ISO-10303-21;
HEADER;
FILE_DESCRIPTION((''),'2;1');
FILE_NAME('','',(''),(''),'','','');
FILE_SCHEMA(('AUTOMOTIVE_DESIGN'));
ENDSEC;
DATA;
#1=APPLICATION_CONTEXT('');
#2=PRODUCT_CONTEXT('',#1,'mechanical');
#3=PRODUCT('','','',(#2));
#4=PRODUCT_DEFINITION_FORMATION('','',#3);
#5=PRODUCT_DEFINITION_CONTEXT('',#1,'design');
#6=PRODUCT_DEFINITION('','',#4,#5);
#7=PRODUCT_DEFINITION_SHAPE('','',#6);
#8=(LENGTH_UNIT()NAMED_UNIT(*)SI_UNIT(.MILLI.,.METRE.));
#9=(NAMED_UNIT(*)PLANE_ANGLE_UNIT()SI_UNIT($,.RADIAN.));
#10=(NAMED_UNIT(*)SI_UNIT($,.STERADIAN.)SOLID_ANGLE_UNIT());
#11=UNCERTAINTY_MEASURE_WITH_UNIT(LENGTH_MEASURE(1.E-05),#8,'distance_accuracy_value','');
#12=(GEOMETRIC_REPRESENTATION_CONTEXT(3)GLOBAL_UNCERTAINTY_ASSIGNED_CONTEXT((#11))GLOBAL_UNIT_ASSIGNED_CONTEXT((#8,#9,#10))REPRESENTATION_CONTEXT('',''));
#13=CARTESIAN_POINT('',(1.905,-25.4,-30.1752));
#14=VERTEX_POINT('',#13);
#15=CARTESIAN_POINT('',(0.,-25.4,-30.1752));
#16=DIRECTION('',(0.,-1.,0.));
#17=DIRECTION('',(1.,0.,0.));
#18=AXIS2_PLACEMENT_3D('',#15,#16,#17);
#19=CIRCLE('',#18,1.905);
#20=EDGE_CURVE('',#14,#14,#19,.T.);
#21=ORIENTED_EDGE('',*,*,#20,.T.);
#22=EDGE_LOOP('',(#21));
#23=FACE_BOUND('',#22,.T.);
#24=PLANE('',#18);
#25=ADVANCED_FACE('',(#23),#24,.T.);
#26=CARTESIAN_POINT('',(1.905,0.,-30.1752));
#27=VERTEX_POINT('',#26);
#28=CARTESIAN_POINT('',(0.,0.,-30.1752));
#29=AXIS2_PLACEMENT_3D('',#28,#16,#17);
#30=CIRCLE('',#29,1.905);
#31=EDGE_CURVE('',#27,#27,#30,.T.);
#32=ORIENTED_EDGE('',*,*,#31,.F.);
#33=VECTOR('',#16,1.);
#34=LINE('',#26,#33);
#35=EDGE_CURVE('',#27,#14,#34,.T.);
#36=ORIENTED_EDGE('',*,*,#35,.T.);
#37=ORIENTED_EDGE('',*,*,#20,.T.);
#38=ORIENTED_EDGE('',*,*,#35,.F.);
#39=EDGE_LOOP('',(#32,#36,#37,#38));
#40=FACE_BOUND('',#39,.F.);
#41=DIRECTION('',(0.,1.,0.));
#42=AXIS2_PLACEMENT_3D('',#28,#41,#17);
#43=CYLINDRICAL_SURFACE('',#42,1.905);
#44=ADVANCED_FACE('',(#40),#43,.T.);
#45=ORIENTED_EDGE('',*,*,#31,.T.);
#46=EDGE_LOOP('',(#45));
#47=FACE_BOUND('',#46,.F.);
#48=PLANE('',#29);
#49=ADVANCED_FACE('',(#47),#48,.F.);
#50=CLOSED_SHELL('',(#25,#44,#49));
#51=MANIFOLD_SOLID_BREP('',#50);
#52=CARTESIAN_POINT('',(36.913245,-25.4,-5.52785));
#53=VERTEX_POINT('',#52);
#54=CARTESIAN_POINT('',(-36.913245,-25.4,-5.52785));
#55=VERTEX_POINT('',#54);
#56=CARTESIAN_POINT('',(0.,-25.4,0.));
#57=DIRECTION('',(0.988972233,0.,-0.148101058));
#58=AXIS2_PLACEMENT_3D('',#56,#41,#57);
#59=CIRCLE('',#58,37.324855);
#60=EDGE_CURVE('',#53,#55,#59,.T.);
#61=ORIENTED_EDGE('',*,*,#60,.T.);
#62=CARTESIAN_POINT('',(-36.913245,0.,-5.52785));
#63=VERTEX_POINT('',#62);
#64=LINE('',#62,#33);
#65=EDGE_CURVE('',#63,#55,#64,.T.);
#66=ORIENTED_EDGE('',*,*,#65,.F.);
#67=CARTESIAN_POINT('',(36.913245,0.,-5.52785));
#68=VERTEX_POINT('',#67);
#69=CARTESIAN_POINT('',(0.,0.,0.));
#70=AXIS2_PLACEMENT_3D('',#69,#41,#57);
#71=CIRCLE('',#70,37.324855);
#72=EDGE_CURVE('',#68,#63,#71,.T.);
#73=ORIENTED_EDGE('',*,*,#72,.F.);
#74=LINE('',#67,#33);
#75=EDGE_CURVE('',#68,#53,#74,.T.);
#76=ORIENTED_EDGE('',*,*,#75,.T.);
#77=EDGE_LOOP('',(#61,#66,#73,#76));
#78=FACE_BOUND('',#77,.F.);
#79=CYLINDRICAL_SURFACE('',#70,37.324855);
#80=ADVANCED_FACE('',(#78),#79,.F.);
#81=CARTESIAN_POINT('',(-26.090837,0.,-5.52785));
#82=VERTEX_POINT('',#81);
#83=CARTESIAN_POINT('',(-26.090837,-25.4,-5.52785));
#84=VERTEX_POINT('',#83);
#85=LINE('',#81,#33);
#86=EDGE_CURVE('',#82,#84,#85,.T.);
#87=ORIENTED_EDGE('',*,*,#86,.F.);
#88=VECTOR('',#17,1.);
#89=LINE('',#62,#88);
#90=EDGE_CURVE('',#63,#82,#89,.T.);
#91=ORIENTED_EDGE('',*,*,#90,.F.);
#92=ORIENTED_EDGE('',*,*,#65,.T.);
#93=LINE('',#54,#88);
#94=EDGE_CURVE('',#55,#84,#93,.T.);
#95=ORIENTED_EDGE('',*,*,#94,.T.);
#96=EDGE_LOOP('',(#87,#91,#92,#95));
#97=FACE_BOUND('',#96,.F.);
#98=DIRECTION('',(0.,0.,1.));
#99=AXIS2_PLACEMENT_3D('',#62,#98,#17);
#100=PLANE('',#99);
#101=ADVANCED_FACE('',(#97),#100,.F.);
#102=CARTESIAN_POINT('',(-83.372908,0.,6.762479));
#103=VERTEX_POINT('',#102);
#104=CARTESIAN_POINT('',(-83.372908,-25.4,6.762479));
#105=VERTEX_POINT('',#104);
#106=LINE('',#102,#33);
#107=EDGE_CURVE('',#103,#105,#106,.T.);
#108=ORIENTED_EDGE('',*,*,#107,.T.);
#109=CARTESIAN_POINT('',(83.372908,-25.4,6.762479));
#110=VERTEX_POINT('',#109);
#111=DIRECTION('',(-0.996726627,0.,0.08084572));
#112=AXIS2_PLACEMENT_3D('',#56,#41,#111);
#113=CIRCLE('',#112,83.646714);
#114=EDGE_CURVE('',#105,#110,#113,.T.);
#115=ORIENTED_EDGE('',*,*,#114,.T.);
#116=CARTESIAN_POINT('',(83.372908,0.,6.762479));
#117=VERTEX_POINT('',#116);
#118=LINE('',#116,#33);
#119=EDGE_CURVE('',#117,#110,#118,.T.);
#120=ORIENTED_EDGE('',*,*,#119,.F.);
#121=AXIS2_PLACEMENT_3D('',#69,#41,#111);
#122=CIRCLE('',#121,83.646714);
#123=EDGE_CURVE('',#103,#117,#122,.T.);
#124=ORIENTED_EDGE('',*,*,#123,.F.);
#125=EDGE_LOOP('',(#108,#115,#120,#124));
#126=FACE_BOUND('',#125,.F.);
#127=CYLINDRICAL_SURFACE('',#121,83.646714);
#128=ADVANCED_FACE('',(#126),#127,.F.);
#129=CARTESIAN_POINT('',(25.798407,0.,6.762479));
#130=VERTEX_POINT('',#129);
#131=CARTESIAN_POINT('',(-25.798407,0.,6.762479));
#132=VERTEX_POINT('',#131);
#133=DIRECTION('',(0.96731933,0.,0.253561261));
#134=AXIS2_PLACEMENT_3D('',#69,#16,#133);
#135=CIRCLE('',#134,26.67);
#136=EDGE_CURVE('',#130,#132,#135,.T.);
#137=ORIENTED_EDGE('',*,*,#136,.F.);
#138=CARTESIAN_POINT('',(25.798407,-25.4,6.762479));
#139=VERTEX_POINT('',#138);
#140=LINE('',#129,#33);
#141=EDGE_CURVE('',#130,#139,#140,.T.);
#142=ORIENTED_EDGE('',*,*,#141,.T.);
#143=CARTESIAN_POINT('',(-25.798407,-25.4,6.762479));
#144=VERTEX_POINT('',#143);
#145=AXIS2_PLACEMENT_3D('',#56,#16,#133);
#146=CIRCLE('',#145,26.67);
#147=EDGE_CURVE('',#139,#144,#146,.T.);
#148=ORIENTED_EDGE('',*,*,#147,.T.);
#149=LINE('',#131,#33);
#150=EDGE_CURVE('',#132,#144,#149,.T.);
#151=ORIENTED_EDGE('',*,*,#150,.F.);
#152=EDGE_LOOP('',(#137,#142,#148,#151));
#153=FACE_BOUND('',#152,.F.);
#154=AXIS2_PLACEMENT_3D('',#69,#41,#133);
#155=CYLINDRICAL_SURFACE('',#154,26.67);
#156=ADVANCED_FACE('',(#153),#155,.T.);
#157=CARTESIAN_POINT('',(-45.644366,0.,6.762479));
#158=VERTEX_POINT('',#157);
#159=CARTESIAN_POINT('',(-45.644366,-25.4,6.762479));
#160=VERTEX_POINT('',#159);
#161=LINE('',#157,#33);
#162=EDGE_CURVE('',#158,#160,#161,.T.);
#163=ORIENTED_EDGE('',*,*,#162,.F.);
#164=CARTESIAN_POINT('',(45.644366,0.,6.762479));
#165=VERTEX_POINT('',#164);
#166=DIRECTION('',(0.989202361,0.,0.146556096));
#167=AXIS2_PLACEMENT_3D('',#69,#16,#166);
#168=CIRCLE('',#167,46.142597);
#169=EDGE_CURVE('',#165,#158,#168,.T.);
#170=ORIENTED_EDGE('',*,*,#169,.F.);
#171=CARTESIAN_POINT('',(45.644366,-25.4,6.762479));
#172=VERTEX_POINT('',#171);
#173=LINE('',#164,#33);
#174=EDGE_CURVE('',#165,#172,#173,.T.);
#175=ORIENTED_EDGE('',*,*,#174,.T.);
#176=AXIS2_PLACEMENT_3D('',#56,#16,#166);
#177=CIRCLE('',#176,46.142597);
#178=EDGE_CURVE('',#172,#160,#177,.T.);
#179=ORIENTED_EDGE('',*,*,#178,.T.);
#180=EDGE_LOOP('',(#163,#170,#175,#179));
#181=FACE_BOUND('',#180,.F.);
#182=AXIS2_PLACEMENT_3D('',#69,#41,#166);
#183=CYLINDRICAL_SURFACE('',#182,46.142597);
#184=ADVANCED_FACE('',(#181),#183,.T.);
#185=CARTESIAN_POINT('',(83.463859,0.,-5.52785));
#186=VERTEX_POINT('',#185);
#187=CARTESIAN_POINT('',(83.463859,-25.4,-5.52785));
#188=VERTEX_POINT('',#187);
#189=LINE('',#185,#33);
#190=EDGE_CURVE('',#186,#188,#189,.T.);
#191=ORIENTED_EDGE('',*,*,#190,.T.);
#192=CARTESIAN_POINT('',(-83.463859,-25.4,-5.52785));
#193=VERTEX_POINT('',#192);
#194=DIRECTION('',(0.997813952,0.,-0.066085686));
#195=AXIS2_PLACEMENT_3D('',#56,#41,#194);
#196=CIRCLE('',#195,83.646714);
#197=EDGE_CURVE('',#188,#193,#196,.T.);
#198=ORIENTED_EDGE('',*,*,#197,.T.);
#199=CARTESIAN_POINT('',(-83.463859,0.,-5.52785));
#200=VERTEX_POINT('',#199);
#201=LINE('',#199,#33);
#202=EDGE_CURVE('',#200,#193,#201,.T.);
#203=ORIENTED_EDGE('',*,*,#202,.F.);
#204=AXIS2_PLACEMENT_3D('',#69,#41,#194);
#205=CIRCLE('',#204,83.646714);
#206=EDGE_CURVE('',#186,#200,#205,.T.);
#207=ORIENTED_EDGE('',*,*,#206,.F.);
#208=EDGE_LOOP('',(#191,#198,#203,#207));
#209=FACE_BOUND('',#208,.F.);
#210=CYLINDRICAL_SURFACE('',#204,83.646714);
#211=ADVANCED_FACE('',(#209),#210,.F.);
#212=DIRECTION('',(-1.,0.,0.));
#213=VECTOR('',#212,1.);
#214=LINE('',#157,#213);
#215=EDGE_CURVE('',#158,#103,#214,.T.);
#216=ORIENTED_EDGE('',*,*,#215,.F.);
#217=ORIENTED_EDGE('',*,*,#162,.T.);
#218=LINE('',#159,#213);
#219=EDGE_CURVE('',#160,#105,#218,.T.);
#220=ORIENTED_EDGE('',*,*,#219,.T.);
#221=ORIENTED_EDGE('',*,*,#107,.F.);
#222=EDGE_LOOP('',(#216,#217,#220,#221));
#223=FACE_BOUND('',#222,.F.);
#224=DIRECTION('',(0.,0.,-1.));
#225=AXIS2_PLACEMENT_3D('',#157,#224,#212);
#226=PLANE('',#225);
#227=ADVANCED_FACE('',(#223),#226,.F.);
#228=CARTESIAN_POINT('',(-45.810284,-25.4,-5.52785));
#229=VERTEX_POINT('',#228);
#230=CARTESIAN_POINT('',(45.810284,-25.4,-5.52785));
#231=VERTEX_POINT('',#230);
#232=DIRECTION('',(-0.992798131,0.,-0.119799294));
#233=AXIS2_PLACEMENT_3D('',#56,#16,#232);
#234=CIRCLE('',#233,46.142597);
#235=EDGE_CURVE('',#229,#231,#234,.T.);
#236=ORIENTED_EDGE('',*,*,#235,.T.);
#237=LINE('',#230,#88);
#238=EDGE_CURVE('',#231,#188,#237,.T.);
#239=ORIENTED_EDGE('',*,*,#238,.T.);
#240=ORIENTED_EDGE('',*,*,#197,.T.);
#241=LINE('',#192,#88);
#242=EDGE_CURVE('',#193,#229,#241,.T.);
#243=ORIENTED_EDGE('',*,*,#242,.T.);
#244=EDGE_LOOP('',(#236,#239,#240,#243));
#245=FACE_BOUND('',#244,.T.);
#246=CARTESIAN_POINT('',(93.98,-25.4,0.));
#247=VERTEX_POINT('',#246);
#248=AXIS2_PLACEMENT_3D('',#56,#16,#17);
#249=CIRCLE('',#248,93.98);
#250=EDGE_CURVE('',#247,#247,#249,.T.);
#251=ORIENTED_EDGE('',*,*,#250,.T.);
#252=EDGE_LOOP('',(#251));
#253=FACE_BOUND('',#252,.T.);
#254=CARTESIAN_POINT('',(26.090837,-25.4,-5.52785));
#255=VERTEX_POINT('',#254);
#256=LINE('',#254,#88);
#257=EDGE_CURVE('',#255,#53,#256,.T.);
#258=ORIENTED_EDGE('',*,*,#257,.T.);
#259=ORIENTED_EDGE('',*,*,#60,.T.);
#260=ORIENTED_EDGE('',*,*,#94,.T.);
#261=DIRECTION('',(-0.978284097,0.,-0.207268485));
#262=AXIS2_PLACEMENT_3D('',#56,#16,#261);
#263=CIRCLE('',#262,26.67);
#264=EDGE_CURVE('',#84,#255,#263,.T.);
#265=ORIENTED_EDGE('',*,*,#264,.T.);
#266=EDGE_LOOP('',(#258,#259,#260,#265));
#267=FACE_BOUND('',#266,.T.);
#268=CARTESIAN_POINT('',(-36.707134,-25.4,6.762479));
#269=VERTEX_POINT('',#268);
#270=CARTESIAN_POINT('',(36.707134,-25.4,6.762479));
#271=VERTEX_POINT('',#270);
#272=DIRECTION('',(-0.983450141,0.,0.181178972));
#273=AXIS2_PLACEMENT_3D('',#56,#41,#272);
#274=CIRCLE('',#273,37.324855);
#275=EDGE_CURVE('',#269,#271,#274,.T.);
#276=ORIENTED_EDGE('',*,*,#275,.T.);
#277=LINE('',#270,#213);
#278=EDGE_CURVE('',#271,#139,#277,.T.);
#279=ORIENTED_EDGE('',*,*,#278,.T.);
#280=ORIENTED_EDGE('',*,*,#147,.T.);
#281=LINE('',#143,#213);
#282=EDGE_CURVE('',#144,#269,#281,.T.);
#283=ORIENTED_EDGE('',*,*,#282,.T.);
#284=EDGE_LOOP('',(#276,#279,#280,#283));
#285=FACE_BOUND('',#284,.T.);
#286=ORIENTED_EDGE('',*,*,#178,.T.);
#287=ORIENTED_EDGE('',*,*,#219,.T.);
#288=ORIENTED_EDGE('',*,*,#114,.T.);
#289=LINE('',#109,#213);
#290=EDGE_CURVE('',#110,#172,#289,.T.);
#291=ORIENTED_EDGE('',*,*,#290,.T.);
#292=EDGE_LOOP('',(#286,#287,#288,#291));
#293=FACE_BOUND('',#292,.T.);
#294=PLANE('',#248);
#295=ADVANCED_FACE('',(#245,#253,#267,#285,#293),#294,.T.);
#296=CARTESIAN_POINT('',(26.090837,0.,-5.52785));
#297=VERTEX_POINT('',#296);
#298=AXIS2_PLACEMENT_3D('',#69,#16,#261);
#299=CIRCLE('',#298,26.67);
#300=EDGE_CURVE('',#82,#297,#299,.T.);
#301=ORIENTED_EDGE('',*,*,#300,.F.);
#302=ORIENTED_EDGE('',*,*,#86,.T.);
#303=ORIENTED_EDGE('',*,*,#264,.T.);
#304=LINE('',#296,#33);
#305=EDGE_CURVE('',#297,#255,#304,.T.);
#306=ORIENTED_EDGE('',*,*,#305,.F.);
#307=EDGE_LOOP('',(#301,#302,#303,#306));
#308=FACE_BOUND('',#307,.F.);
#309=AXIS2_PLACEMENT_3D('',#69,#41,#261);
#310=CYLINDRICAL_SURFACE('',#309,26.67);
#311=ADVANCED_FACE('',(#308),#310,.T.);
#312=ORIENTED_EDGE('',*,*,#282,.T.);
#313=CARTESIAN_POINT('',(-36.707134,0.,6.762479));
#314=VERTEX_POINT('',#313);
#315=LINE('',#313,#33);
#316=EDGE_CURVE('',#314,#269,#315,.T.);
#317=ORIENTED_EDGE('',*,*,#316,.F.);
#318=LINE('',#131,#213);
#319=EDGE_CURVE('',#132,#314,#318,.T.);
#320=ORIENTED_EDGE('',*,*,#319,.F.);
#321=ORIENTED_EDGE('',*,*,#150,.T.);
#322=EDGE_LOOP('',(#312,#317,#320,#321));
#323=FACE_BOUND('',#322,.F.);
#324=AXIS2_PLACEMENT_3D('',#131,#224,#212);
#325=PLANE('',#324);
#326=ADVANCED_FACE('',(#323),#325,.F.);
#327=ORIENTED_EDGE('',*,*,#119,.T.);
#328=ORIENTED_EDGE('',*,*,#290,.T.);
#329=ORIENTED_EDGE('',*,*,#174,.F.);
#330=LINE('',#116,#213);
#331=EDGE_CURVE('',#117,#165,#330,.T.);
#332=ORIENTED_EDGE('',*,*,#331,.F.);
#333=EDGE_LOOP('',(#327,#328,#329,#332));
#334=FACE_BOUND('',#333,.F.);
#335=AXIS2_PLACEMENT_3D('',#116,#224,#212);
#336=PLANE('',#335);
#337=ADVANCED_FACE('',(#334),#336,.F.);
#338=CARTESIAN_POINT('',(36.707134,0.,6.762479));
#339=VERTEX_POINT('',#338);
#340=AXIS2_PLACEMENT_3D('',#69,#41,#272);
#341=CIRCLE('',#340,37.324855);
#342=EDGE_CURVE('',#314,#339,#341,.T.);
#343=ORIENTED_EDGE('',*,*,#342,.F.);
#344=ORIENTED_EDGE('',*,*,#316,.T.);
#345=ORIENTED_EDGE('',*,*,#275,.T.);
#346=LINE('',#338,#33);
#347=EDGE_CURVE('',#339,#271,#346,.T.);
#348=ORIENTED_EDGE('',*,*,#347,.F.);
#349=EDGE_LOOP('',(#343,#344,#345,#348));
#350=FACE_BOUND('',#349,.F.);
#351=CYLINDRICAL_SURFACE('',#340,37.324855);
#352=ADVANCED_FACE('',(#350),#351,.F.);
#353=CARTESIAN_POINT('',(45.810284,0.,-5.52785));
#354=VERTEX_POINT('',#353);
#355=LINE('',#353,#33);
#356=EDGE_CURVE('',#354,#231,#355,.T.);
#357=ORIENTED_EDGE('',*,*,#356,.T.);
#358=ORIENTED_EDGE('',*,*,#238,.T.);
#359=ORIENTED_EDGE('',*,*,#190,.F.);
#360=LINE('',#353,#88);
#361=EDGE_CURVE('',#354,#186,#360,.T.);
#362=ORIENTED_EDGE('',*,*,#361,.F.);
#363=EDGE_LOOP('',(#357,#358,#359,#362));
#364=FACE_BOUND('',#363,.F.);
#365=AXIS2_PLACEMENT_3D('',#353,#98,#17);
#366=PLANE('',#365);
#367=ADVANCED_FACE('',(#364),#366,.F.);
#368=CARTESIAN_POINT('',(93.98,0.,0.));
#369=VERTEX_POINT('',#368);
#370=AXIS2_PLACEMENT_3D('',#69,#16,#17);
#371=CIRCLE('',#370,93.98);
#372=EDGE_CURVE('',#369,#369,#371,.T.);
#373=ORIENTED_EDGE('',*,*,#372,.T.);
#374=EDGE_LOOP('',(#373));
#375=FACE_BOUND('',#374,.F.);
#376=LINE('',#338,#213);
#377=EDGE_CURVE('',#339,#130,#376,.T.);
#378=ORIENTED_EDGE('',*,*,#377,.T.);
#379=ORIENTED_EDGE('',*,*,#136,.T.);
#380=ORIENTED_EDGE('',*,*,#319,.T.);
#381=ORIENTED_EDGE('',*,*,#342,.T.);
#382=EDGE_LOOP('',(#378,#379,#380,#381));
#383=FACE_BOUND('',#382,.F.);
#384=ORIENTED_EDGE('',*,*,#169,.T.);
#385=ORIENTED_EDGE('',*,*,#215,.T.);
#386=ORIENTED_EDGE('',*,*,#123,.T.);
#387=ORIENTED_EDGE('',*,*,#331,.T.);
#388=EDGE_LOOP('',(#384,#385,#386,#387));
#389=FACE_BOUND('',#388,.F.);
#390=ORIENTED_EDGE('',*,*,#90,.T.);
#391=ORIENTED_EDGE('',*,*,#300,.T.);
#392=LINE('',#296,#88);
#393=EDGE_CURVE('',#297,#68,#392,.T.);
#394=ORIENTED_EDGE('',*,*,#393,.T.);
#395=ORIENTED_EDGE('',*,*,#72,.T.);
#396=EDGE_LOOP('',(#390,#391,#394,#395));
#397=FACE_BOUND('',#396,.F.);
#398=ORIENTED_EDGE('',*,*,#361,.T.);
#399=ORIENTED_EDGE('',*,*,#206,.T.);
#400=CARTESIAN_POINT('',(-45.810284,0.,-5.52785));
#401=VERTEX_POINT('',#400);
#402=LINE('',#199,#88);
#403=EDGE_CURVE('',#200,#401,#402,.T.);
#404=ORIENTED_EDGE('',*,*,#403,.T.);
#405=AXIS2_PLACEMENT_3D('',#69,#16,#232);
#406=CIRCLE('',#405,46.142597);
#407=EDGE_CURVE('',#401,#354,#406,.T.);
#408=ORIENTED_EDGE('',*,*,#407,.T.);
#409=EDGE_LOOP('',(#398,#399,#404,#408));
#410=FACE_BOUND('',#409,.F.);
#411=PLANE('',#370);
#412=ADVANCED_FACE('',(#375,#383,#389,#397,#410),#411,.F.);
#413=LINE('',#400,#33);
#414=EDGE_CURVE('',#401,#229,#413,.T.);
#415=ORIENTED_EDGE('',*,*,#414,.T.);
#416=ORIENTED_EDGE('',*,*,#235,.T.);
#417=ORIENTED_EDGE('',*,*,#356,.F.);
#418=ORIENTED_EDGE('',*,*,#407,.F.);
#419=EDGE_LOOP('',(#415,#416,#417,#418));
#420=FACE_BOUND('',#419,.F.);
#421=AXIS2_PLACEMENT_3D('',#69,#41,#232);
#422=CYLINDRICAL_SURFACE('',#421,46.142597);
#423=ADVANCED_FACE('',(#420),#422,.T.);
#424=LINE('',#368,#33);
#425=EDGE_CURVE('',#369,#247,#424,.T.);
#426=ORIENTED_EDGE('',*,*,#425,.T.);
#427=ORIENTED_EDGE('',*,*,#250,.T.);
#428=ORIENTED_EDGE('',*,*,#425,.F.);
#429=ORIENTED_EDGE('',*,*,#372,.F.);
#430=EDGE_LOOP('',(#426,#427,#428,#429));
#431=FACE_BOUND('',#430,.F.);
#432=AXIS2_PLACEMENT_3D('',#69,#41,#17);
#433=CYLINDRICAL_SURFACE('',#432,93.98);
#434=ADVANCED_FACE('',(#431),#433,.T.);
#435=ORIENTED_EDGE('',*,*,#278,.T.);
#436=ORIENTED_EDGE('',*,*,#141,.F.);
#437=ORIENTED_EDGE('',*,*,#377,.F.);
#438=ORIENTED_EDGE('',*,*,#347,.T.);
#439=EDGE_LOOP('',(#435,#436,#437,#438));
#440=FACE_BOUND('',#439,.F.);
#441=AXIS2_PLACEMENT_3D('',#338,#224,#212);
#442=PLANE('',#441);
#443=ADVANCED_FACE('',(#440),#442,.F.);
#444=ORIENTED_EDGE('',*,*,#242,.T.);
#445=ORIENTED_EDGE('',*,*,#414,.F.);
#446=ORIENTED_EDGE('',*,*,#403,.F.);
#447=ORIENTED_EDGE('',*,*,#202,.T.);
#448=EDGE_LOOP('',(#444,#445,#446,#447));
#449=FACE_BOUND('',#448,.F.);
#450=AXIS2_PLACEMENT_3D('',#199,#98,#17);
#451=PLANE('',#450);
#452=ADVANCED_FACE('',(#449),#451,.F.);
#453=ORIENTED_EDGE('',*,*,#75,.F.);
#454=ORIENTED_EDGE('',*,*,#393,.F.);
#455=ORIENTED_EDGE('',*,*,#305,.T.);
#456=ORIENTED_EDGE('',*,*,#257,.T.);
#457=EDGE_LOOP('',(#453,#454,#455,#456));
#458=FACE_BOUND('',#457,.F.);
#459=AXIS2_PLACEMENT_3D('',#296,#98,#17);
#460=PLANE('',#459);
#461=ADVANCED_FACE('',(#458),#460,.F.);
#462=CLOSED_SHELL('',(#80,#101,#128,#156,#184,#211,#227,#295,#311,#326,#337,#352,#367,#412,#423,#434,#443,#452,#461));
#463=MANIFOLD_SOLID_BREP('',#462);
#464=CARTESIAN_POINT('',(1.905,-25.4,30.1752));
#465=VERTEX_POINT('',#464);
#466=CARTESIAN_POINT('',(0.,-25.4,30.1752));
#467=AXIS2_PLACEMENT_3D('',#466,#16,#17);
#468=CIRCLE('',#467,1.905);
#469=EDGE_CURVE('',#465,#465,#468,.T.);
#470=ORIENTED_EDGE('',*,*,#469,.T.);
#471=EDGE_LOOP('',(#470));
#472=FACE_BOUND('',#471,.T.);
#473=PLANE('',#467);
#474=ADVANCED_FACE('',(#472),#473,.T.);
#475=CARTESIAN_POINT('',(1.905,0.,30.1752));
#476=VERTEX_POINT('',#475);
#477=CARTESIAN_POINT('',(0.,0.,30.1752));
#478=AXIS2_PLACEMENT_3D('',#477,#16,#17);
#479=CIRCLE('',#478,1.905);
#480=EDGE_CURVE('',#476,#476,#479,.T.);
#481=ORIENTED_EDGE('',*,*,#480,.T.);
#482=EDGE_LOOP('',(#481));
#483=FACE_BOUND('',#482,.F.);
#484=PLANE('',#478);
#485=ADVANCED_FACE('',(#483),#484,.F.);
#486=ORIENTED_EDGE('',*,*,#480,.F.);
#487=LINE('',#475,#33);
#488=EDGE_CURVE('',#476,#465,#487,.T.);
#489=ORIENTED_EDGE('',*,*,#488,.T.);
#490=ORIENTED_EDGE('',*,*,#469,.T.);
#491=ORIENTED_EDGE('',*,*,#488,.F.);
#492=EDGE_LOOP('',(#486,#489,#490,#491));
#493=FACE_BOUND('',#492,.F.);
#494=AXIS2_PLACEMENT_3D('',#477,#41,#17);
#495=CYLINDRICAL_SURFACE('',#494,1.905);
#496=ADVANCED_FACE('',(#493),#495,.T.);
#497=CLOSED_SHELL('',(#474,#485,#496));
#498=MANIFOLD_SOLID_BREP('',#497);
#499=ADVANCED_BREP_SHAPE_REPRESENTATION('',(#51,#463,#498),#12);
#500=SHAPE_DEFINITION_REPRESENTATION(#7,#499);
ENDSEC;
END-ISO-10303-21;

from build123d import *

# Parameters (mm, degrees)
F0_R     = 93.98
F0_W     = 9.525
F0_H     = 25.4
F1_DEPTH = 25.4
F0_R_2   = 1.905


# Not quite as in the source:
# - a feature of the source that left no trace in its solid (it failed there, or was rolled back) is left out


with BuildPart() as f1:
    # F0 (on Front) → F1 (new body)
    with BuildSketch(Plane.XZ):
        Circle(F0_R)
        with BuildLine():
            ThreePointArc((-45.8102837042, -5.5278504869), (0, -46.1425966333), (45.8102837042, -5.5278504869))
            Line((45.8102837042, -5.5278504869), (83.4638586571, -5.5278504869))
            ThreePointArc((83.4638586571, -5.5278504869), (0, -83.646714418), (-83.4638586571, -5.5278504869))
            Line((-83.4638586571, -5.5278504869), (-45.8102837042, -5.5278504869))
        make_face(mode=Mode.SUBTRACT)
        with BuildLine():
            ThreePointArc((36.9132450635, -5.5278504869), (0, -37.3248548841), (-36.9132450635, -5.5278504869))
            Line((-36.9132450635, -5.5278504869), (-26.090836878, -5.5278504869))
            ThreePointArc((-26.090836878, -5.5278504869), (0, -26.67), (26.090836878, -5.5278504869))
            Line((26.090836878, -5.5278504869), (36.9132450635, -5.5278504869))
        make_face(mode=Mode.SUBTRACT)
        Rectangle(F0_W, F0_H, mode=Mode.SUBTRACT)
        with BuildLine():
            ThreePointArc((-36.7071338058, 6.7624788271), (0, 37.3248548841), (36.7071338058, 6.7624788271))
            Line((36.7071338058, 6.7624788271), (25.7984065421, 6.7624788271))
            ThreePointArc((25.7984065421, 6.7624788271), (0, 26.67), (-25.7984065421, 6.7624788271))
            Line((-25.7984065421, 6.7624788271), (-36.7071338058, 6.7624788271))
        make_face(mode=Mode.SUBTRACT)
        with BuildLine():
            Line((83.3729075482, 6.7624788271), (45.644365525, 6.7624788271))
            ThreePointArc((45.644365525, 6.7624788271), (0, 46.1425966333), (-45.644365525, 6.7624788271))
            Line((-45.644365525, 6.7624788271), (-83.3729075482, 6.7624788271))
            ThreePointArc((-83.3729075482, 6.7624788271), (0, 83.646714418), (83.3729075482, 6.7624788271))
        make_face(mode=Mode.SUBTRACT)
        Rectangle(F0_W, F0_H)
    extrude(amount=F1_DEPTH)


with BuildPart() as f1b:
    # F0 (on Front) → F1, piece 2 (new body)
    with BuildSketch(Plane.XZ):
        with Locations((0, 30.1752)):
            Circle(F0_R_2)
    extrude(amount=F1_DEPTH)


with BuildPart() as f1c:
    # F0 (on Front) → F1, piece 3 (new body)
    with BuildSketch(Plane.XZ):
        with Locations((0, -30.1752)):
            Circle(F0_R_2)
    extrude(amount=F1_DEPTH)


solid = Compound([f1.part, f1b.part, f1c.part])
